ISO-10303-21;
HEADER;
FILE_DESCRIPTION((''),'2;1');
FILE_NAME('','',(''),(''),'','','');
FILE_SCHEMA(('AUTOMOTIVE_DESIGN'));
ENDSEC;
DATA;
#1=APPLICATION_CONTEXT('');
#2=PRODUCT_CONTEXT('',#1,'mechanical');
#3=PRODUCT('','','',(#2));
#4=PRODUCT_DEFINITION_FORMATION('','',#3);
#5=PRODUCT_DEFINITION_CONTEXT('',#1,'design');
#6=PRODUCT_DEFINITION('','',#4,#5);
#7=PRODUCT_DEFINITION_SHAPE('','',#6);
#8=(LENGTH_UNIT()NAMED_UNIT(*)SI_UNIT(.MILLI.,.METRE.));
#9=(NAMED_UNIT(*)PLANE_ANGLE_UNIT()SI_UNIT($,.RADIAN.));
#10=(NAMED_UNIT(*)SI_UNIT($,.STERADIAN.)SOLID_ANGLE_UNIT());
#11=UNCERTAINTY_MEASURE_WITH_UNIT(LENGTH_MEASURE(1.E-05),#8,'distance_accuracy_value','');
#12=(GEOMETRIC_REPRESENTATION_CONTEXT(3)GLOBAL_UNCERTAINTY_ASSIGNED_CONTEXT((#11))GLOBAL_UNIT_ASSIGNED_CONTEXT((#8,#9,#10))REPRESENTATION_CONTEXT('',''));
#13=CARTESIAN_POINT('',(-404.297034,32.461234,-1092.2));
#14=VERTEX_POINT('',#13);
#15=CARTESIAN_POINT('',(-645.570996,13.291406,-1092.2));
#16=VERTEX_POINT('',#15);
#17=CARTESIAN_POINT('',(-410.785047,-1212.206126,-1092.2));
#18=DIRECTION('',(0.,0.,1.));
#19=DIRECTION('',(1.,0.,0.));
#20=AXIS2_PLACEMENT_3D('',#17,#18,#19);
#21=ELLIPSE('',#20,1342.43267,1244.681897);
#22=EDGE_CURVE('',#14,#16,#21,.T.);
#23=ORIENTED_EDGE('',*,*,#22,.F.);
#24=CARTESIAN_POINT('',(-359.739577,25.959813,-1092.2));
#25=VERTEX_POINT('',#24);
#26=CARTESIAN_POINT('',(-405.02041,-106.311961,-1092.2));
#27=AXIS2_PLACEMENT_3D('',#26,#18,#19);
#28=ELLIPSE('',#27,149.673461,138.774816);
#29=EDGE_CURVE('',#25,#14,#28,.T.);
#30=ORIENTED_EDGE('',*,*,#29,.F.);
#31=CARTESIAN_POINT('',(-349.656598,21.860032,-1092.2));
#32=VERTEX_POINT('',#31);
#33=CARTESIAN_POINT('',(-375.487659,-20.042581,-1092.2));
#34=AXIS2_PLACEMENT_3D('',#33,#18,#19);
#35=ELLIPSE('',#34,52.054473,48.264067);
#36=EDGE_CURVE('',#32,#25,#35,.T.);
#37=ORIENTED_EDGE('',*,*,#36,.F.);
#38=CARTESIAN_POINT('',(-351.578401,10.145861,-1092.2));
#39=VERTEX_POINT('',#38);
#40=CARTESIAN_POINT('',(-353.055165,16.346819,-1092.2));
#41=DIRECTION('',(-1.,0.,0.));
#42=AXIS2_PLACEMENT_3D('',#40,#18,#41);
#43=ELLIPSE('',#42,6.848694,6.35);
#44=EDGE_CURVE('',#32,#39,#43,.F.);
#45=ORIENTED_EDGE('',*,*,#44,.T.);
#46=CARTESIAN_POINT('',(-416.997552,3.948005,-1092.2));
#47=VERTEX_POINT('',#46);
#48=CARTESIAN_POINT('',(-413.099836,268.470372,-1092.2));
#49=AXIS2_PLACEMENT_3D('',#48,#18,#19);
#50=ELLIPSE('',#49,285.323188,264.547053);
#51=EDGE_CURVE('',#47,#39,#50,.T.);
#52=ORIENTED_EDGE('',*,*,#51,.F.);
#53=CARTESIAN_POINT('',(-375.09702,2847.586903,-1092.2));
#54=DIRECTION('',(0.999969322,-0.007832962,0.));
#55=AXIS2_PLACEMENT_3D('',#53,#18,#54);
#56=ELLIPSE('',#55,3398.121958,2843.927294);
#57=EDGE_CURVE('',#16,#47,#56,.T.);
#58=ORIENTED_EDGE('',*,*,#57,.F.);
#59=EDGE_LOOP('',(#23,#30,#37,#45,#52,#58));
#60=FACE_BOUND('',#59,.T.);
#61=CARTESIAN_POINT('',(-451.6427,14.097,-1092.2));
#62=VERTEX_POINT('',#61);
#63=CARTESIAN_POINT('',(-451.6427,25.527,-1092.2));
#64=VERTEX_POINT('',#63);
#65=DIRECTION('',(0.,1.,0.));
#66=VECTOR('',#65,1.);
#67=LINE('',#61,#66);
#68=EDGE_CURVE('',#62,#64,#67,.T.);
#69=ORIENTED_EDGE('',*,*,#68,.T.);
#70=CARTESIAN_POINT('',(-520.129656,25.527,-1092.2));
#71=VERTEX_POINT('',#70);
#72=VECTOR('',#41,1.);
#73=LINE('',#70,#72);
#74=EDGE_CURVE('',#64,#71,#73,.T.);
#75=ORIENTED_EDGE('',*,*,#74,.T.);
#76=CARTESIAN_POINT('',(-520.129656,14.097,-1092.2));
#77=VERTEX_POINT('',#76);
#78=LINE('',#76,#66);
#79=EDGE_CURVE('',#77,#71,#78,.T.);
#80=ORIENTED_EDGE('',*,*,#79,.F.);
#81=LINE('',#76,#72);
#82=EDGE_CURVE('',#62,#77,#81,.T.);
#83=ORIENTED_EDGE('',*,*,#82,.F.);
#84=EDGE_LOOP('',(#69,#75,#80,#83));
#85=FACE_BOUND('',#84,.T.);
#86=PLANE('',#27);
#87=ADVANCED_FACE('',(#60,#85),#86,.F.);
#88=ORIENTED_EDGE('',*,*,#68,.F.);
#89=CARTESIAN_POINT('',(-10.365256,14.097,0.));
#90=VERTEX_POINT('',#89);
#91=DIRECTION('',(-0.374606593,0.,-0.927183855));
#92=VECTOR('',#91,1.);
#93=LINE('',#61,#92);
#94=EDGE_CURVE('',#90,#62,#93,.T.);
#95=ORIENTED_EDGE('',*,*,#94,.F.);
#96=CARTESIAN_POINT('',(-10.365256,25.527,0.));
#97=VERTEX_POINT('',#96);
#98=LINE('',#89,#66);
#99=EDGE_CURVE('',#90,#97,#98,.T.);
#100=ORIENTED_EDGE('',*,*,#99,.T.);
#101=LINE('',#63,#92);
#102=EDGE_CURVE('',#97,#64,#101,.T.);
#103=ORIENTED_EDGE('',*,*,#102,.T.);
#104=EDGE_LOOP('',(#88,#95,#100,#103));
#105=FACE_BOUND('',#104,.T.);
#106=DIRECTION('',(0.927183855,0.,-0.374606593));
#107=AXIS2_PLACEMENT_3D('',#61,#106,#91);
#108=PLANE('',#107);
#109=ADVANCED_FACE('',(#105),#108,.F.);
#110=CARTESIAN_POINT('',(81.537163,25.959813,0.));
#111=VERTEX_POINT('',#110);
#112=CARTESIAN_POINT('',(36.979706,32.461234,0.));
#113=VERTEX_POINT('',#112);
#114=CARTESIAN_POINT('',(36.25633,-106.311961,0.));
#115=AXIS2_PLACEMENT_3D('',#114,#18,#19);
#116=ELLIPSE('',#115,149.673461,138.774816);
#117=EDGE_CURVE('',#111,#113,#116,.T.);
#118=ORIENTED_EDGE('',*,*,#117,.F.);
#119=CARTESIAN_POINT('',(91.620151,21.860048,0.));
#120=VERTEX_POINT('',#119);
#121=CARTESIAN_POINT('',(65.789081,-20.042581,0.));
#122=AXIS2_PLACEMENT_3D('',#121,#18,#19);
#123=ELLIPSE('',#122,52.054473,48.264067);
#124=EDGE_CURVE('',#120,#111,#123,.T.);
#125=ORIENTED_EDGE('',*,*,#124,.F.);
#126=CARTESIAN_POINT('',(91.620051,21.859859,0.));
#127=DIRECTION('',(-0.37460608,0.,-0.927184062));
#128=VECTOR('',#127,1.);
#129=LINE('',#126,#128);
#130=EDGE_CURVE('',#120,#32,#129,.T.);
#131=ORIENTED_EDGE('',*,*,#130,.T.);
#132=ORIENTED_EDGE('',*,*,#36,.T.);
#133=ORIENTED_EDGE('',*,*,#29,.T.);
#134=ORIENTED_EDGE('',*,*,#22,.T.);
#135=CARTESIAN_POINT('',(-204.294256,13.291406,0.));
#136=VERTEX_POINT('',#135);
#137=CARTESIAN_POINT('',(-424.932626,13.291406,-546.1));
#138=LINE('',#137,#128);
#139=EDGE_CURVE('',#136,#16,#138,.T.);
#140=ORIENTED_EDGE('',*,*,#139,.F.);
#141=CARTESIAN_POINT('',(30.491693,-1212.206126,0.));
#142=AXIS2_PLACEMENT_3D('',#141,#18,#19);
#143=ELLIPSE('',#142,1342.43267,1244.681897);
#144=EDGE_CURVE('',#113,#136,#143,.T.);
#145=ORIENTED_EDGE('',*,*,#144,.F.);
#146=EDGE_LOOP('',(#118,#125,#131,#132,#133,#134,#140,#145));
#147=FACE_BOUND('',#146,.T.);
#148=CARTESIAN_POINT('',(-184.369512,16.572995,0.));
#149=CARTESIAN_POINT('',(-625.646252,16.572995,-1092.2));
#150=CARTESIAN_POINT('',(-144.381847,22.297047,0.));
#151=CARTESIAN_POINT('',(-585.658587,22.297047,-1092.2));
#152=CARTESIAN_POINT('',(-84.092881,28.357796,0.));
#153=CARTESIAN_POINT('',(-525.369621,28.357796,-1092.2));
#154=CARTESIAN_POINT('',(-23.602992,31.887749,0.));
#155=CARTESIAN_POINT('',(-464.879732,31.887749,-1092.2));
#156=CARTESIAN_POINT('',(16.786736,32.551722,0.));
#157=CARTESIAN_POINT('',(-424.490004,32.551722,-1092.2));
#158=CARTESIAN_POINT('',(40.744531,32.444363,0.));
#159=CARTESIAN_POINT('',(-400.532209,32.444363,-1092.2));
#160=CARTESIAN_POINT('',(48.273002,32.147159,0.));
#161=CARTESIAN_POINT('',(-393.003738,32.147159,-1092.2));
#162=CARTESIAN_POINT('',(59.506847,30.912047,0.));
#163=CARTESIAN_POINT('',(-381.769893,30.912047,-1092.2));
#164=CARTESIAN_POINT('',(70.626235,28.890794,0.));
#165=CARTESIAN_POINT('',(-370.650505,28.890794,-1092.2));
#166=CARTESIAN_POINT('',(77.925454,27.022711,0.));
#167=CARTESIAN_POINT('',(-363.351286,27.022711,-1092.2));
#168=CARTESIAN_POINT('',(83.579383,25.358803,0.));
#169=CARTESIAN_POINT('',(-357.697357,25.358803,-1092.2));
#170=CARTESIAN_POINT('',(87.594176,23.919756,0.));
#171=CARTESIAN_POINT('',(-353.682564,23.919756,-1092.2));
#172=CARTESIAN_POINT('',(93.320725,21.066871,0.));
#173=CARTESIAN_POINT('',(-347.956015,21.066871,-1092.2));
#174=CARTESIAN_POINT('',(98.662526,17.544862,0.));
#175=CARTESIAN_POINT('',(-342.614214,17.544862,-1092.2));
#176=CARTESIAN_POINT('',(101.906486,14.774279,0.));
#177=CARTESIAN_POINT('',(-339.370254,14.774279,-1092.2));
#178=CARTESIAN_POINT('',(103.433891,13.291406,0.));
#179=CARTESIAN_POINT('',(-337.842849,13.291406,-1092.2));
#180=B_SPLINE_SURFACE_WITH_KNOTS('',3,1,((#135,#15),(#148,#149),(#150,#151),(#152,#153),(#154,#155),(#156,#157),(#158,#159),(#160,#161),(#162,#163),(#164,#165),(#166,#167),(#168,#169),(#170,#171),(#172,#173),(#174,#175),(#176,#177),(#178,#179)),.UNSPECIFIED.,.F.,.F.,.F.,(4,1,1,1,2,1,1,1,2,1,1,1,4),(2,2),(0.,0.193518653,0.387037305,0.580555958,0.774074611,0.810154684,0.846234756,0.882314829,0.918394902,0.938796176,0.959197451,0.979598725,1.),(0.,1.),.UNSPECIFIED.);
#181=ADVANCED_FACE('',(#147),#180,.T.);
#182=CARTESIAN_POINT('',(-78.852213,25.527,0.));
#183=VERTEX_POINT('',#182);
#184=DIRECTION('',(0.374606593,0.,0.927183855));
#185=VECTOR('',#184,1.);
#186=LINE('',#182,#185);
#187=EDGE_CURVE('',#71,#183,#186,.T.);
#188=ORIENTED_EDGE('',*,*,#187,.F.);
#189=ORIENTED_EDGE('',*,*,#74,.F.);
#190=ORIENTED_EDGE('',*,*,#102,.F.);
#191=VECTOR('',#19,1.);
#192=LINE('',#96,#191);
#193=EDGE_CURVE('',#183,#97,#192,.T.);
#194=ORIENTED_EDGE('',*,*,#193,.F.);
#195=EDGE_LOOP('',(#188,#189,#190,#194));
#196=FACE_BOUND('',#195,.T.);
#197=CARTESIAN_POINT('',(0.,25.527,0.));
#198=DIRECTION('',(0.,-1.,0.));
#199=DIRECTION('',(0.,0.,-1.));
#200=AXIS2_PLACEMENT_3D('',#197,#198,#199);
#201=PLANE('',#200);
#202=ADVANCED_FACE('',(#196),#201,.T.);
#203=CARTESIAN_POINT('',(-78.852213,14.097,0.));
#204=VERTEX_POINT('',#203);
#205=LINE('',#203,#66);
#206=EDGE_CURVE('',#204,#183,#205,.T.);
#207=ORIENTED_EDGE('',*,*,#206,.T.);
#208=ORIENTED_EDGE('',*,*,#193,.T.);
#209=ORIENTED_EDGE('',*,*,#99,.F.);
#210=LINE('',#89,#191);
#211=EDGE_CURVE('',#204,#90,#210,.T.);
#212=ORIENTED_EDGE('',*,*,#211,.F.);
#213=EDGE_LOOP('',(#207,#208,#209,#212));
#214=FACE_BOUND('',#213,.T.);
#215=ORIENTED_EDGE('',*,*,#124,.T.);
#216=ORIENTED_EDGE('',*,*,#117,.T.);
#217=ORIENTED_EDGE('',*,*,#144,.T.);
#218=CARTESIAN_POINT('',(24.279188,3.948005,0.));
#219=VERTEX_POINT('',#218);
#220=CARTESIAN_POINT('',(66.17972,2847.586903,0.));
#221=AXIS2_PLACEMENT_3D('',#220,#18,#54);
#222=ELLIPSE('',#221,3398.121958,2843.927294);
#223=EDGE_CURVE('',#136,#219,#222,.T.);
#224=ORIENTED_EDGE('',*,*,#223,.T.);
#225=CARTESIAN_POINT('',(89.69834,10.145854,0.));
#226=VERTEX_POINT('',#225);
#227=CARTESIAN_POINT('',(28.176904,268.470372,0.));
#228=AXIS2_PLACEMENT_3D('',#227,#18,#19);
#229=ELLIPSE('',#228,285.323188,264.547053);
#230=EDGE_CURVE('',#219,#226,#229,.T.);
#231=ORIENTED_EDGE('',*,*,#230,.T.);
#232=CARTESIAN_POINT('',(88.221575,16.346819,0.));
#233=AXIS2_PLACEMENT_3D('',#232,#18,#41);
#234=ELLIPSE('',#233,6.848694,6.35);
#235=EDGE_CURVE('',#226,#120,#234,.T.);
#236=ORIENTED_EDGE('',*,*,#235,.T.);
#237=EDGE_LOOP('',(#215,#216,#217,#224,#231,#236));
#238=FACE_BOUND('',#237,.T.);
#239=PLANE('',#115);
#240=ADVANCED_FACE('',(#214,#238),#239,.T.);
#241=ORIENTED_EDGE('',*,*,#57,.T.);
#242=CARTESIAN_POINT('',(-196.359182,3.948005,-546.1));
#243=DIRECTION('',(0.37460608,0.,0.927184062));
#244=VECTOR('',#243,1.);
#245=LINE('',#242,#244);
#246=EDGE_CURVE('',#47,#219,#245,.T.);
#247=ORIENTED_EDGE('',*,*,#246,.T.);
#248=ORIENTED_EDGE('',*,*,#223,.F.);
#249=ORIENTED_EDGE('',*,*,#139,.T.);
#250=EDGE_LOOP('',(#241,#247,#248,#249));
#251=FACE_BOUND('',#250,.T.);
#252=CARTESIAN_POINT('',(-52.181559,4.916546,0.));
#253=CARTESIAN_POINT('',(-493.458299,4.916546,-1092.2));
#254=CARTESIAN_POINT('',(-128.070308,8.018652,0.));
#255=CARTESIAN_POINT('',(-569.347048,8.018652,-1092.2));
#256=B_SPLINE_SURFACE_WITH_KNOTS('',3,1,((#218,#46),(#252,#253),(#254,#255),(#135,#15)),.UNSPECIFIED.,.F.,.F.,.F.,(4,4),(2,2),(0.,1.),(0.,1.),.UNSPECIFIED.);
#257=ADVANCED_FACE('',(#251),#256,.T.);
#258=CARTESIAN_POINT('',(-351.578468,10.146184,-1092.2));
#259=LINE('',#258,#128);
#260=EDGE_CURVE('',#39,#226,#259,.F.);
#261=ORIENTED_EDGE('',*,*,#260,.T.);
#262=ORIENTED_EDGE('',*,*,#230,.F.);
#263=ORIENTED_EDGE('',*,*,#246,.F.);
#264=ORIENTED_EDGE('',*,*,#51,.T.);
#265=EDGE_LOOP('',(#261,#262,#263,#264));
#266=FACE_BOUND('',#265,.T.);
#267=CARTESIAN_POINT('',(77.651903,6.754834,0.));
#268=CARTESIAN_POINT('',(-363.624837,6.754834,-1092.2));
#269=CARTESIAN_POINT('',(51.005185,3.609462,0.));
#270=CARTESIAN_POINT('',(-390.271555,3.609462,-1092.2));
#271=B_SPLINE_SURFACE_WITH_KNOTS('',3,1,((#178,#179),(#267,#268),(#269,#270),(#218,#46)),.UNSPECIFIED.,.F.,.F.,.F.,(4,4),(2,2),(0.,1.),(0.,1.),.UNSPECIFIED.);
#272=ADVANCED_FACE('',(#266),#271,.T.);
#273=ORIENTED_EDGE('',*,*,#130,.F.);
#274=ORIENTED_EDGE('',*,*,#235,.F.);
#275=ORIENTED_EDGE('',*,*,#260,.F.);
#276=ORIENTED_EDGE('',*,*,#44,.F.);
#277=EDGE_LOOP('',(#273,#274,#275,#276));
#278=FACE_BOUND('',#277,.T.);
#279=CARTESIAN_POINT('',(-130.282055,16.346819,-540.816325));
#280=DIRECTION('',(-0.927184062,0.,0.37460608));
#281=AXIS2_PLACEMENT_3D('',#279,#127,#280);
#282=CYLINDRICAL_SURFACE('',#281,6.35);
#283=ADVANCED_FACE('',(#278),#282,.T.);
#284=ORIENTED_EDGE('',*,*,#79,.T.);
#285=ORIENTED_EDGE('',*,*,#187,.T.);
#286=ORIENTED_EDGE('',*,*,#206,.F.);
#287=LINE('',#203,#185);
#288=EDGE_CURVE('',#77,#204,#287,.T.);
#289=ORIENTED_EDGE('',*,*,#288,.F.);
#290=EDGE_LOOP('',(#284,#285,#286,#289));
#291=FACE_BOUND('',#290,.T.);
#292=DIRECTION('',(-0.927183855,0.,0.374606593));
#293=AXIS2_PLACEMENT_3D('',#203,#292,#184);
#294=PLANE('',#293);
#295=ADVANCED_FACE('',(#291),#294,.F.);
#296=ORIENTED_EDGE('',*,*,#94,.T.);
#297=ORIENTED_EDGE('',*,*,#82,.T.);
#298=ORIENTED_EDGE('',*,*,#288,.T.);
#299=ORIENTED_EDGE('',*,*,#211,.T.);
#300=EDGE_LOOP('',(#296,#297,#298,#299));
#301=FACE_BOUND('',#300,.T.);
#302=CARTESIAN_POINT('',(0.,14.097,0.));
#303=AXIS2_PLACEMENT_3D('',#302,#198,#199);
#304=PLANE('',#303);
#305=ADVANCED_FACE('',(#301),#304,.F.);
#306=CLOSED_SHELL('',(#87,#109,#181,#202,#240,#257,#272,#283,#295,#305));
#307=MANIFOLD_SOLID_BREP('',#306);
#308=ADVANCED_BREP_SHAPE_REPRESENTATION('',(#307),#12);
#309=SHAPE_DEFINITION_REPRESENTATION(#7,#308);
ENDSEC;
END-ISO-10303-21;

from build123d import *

# Parameters (mm, degrees)
FILLET1_R          = 6.35
CUT_EXTRUDE1_DEPTH = 5.715


with BuildPart() as part:
    # Loft1: read off the stored shape, not the designer's step
    # Loft1: loft between two sections, ruled curve by curve
    loft1_from = [
        Edge.make_bspline([(24.279187945, 3.948004614, 0), (-52.181559212, 4.916545658, 0), (-128.070307753, 8.018651666, 0), (-204.294256369, 13.29140622, 0)], [0, 0, 0, 0, 1, 1, 1, 1], 3),
        Edge.make_bspline([(-204.294256369, 13.29140622, 0), (-184.369512206, 16.572994832, 0), (-144.381846874, 22.297046923, 0), (-84.092880853, 28.357796113, 0), (-23.602992188, 31.887748815, 0), (16.786735513, 32.551722112, 0), (40.744531167, 32.444363464, 0), (48.273002024, 32.147159251, 0), (59.506847478, 30.912047149, 0), (70.62623515, 28.890794317, 0), (77.925454281, 27.022710847, 0), (83.579383211, 25.35880292, 0), (87.594175743, 23.919756171, 0), (93.32072474, 21.066871392, 0), (98.662526007, 17.544862079, 0), (101.906485619, 14.774278592, 0), (103.433890649, 13.29140622, 0)], [0, 0, 0, 0, 0.193518653, 0.387037305, 0.580555958, 0.774074611, 0.774074611, 0.810154684, 0.846234756, 0.882314829, 0.918394902, 0.918394902, 0.938796176, 0.959197451, 0.979598725, 1, 1, 1, 1], 3),
        Edge.make_bspline([(103.433890649, 13.29140622, 0), (77.651903075, 6.754833934, 0), (51.005185394, 3.609461944, 0), (24.279187945, 3.948004614, 0)], [0, 0, 0, 0, 1, 1, 1, 1], 3),
    ]
    loft1_to = [
        Edge.make_bspline([(-416.997552056, 3.948004614, -1092.2), (-493.458299212, 4.916545658, -1092.2), (-569.347047753, 8.018651666, -1092.2), (-645.570996369, 13.29140622, -1092.2)], [0, 0, 0, 0, 1, 1, 1, 1], 3),
        Edge.make_bspline([(-645.570996369, 13.29140622, -1092.2), (-625.646252206, 16.572994832, -1092.2), (-585.658586874, 22.297046923, -1092.2), (-525.369620853, 28.357796113, -1092.2), (-464.879732188, 31.887748815, -1092.2), (-424.490004487, 32.551722112, -1092.2), (-400.532208833, 32.444363464, -1092.2), (-393.003737976, 32.147159251, -1092.2), (-381.769892522, 30.912047149, -1092.2), (-370.65050485, 28.890794317, -1092.2), (-363.351285719, 27.022710847, -1092.2), (-357.697356789, 25.35880292, -1092.2), (-353.682564257, 23.919756171, -1092.2), (-347.95601526, 21.066871392, -1092.2), (-342.614213993, 17.544862079, -1092.2), (-339.370254381, 14.774278592, -1092.2), (-337.842849351, 13.29140622, -1092.2)], [0, 0, 0, 0, 0.193518653, 0.387037305, 0.580555958, 0.774074611, 0.774074611, 0.810154684, 0.846234756, 0.882314829, 0.918394902, 0.918394902, 0.938796176, 0.959197451, 0.979598725, 1, 1, 1, 1], 3),
        Edge.make_bspline([(-337.842849351, 13.29140622, -1092.2), (-363.624836925, 6.754833934, -1092.2), (-390.271554606, 3.609461944, -1092.2), (-416.997552056, 3.948004614, -1092.2)], [0, 0, 0, 0, 1, 1, 1, 1], 3),
    ]
    loft1 = Solid(Shell([*[Face.make_surface_from_curves(loft1_from[k], loft1_to[k]) for k in range(3)], Face(Wire(loft1_from)), Face(Wire(loft1_to))]))
    add(loft1)

    # Fillet1
    fillet1_edges = [part.edges().sort_by_distance(p)[0] for p in [
        (-117.204479351, 13.29140622, -546.1),
    ]]
    fillet(fillet1_edges, radius=FILLET1_R)

    # Sketch10 → Cut-Extrude1 (cut, symmetric)
    with BuildSketch(Plane(origin=(0, 19.812, 0), x_dir=(1, 0, 0), z_dir=(0, 1, 0))):
        Polygon((-451.642700268, 1092.2), (-10.365256411, 0), (-78.852212571, 0), (-520.129656429, 1092.2), align=None)
    extrude(amount=CUT_EXTRUDE1_DEPTH, both=True, mode=Mode.SUBTRACT)


solid = part.part
